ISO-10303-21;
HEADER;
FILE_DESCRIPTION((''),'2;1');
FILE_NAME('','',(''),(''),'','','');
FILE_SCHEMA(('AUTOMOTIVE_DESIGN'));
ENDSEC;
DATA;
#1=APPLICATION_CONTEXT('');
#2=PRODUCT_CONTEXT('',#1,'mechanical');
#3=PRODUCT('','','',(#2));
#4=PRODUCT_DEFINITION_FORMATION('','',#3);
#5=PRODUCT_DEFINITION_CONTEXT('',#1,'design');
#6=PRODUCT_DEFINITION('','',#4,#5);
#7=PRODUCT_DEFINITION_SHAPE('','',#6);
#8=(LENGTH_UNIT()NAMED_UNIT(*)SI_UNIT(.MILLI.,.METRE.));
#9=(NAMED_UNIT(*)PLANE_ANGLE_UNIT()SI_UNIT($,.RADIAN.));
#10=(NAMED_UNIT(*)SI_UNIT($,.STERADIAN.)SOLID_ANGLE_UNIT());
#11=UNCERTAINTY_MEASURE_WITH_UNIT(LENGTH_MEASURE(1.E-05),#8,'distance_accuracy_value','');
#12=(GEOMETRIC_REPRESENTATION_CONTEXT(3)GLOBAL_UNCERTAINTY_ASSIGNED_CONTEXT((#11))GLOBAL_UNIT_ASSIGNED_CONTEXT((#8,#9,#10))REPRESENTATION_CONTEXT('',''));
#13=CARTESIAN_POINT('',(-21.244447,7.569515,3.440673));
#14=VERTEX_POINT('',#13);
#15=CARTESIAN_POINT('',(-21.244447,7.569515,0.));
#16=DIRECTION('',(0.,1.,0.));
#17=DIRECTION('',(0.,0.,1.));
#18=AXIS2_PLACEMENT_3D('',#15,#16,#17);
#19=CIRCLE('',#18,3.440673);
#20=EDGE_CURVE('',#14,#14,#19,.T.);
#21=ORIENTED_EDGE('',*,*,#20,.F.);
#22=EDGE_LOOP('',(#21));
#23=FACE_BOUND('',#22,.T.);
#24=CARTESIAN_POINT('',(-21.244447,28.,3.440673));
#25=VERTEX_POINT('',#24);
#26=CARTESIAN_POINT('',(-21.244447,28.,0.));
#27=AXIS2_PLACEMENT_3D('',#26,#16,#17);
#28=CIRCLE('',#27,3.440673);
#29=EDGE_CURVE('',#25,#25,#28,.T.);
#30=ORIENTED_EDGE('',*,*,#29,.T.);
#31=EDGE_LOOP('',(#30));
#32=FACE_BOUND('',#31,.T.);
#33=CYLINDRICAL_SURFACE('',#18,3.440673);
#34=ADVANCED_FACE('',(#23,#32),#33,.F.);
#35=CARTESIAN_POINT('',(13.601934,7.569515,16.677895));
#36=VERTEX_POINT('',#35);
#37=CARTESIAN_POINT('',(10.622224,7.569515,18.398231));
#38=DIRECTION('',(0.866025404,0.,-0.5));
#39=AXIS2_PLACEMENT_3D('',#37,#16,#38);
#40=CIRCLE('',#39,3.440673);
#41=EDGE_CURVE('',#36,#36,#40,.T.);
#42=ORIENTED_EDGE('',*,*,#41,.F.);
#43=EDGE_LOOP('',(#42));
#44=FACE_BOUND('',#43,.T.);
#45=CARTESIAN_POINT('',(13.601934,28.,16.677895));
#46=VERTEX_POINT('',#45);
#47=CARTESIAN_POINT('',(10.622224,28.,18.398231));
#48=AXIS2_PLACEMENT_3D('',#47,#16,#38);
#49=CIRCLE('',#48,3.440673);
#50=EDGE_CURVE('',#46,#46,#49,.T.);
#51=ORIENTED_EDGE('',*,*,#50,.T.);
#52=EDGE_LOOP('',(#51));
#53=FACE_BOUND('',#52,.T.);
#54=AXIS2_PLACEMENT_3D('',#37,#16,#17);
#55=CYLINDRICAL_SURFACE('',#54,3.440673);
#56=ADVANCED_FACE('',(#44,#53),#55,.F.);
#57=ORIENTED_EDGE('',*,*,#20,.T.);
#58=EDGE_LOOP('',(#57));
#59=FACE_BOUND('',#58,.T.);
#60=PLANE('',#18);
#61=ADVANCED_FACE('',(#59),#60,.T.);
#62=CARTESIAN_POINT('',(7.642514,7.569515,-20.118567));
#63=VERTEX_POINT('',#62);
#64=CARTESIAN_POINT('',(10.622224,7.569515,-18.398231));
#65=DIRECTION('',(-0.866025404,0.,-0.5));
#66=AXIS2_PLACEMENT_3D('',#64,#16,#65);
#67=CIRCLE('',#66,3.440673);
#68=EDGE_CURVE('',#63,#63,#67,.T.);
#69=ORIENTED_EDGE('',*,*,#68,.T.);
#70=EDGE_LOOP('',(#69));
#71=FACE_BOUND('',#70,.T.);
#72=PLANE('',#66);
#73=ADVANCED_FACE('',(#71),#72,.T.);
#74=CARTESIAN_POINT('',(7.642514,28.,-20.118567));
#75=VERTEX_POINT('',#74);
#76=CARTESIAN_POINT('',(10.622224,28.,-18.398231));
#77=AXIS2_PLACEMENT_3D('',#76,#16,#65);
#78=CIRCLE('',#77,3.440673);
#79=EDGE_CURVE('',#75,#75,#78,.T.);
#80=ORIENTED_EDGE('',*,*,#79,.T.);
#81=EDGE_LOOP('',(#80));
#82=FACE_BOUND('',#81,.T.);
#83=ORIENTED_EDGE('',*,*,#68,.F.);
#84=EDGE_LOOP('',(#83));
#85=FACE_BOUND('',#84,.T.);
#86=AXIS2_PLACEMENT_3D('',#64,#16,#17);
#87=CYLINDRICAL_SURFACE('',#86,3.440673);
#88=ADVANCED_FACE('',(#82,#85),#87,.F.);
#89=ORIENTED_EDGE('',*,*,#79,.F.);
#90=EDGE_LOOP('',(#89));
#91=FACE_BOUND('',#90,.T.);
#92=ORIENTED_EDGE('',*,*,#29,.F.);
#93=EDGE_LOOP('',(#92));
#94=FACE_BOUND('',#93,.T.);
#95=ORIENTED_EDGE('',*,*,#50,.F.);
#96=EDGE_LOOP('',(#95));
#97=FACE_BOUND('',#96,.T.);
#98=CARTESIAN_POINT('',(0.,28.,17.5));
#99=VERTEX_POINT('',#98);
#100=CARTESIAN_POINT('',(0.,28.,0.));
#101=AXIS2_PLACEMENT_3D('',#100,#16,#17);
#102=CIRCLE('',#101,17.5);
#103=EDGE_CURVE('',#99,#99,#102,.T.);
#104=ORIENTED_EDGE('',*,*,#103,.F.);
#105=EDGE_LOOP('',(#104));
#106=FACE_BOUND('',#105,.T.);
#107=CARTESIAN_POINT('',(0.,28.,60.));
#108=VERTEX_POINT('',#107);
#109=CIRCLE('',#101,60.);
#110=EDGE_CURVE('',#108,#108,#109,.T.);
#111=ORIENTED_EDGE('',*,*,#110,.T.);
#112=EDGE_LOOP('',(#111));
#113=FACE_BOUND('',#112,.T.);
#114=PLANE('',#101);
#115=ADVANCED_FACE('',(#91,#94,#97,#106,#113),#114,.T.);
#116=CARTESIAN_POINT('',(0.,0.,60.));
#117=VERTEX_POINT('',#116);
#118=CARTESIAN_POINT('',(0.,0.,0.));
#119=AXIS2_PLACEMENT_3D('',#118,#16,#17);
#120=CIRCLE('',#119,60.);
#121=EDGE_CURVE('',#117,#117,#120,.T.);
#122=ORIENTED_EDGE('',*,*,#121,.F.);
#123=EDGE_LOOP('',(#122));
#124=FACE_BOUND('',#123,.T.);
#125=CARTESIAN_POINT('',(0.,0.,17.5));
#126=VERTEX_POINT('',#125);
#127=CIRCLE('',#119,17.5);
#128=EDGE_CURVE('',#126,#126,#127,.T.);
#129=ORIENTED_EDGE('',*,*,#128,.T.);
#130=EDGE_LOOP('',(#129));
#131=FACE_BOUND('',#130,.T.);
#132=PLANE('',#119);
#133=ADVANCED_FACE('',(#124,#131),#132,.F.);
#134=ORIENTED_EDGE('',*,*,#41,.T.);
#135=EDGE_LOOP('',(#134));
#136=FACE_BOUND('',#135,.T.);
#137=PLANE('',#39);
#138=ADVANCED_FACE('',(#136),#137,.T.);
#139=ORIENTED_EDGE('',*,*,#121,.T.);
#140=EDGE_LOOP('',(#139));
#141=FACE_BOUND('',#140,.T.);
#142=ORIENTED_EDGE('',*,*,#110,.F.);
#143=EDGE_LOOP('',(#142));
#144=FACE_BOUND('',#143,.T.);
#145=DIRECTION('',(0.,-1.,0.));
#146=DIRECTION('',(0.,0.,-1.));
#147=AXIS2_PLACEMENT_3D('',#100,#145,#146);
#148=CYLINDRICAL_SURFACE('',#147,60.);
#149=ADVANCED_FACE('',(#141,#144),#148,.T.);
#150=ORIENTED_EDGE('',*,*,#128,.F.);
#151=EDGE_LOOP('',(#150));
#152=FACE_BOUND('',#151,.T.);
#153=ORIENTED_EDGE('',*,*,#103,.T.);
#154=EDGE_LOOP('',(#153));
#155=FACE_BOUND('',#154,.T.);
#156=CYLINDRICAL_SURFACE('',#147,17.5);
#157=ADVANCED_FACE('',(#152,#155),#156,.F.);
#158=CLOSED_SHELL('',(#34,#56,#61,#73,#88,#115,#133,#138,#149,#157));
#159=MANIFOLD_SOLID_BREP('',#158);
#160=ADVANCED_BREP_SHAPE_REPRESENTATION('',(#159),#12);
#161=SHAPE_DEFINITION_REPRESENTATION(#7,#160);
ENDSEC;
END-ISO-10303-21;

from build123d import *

# Parameters (mm, degrees)
SKETCH1_R           = 60
BOSS_EXTRUDE1_DEPTH = 28
SKETCH2_R           = 17.5
CUT_EXTRUDE1_DEPTH  = 90.353231615
SKETCH3_R           = 3.440672649
CUT_EXTRUDE2_DEPTH  = 20.430485337
CIRPATTERN1_COUNT   = 3


with BuildPart() as part:
    # Sketch1 → Boss-Extrude1 (new body)
    with BuildSketch(Plane(origin=(0, 0, 0), x_dir=(1, 0, 0), z_dir=(0, 1, 0))):
        Circle(SKETCH1_R)
    extrude(amount=BOSS_EXTRUDE1_DEPTH)

    # Sketch2 → Cut-Extrude1 (cut, through all)
    with BuildSketch(Plane(origin=(0, 0, 0), x_dir=(1, 0, 0), z_dir=(0, 1, 0))):
        Circle(SKETCH2_R)
    extrude(amount=CUT_EXTRUDE1_DEPTH, mode=Mode.SUBTRACT)

    # Sketch3 → Cut-Extrude2 (cut)
    with BuildSketch(Plane(origin=(0, 28, 0), x_dir=(1, 0, 0), z_dir=(0, 1, 0))):
        with Locations((-21.24444726, 0)):
            Circle(SKETCH3_R)
    cut_extrude2 = extrude(amount=-CUT_EXTRUDE2_DEPTH, mode=Mode.SUBTRACT)

    # CirPattern1: Cut-Extrude2 ×3 about axis
    cirpattern1_axis = Axis((0, 0, 0), (0, 1, 0))
    for i in range(1, CIRPATTERN1_COUNT):
        add(cut_extrude2.rotate(cirpattern1_axis, i * 360 / CIRPATTERN1_COUNT), mode=Mode.SUBTRACT)


solid = part.part
